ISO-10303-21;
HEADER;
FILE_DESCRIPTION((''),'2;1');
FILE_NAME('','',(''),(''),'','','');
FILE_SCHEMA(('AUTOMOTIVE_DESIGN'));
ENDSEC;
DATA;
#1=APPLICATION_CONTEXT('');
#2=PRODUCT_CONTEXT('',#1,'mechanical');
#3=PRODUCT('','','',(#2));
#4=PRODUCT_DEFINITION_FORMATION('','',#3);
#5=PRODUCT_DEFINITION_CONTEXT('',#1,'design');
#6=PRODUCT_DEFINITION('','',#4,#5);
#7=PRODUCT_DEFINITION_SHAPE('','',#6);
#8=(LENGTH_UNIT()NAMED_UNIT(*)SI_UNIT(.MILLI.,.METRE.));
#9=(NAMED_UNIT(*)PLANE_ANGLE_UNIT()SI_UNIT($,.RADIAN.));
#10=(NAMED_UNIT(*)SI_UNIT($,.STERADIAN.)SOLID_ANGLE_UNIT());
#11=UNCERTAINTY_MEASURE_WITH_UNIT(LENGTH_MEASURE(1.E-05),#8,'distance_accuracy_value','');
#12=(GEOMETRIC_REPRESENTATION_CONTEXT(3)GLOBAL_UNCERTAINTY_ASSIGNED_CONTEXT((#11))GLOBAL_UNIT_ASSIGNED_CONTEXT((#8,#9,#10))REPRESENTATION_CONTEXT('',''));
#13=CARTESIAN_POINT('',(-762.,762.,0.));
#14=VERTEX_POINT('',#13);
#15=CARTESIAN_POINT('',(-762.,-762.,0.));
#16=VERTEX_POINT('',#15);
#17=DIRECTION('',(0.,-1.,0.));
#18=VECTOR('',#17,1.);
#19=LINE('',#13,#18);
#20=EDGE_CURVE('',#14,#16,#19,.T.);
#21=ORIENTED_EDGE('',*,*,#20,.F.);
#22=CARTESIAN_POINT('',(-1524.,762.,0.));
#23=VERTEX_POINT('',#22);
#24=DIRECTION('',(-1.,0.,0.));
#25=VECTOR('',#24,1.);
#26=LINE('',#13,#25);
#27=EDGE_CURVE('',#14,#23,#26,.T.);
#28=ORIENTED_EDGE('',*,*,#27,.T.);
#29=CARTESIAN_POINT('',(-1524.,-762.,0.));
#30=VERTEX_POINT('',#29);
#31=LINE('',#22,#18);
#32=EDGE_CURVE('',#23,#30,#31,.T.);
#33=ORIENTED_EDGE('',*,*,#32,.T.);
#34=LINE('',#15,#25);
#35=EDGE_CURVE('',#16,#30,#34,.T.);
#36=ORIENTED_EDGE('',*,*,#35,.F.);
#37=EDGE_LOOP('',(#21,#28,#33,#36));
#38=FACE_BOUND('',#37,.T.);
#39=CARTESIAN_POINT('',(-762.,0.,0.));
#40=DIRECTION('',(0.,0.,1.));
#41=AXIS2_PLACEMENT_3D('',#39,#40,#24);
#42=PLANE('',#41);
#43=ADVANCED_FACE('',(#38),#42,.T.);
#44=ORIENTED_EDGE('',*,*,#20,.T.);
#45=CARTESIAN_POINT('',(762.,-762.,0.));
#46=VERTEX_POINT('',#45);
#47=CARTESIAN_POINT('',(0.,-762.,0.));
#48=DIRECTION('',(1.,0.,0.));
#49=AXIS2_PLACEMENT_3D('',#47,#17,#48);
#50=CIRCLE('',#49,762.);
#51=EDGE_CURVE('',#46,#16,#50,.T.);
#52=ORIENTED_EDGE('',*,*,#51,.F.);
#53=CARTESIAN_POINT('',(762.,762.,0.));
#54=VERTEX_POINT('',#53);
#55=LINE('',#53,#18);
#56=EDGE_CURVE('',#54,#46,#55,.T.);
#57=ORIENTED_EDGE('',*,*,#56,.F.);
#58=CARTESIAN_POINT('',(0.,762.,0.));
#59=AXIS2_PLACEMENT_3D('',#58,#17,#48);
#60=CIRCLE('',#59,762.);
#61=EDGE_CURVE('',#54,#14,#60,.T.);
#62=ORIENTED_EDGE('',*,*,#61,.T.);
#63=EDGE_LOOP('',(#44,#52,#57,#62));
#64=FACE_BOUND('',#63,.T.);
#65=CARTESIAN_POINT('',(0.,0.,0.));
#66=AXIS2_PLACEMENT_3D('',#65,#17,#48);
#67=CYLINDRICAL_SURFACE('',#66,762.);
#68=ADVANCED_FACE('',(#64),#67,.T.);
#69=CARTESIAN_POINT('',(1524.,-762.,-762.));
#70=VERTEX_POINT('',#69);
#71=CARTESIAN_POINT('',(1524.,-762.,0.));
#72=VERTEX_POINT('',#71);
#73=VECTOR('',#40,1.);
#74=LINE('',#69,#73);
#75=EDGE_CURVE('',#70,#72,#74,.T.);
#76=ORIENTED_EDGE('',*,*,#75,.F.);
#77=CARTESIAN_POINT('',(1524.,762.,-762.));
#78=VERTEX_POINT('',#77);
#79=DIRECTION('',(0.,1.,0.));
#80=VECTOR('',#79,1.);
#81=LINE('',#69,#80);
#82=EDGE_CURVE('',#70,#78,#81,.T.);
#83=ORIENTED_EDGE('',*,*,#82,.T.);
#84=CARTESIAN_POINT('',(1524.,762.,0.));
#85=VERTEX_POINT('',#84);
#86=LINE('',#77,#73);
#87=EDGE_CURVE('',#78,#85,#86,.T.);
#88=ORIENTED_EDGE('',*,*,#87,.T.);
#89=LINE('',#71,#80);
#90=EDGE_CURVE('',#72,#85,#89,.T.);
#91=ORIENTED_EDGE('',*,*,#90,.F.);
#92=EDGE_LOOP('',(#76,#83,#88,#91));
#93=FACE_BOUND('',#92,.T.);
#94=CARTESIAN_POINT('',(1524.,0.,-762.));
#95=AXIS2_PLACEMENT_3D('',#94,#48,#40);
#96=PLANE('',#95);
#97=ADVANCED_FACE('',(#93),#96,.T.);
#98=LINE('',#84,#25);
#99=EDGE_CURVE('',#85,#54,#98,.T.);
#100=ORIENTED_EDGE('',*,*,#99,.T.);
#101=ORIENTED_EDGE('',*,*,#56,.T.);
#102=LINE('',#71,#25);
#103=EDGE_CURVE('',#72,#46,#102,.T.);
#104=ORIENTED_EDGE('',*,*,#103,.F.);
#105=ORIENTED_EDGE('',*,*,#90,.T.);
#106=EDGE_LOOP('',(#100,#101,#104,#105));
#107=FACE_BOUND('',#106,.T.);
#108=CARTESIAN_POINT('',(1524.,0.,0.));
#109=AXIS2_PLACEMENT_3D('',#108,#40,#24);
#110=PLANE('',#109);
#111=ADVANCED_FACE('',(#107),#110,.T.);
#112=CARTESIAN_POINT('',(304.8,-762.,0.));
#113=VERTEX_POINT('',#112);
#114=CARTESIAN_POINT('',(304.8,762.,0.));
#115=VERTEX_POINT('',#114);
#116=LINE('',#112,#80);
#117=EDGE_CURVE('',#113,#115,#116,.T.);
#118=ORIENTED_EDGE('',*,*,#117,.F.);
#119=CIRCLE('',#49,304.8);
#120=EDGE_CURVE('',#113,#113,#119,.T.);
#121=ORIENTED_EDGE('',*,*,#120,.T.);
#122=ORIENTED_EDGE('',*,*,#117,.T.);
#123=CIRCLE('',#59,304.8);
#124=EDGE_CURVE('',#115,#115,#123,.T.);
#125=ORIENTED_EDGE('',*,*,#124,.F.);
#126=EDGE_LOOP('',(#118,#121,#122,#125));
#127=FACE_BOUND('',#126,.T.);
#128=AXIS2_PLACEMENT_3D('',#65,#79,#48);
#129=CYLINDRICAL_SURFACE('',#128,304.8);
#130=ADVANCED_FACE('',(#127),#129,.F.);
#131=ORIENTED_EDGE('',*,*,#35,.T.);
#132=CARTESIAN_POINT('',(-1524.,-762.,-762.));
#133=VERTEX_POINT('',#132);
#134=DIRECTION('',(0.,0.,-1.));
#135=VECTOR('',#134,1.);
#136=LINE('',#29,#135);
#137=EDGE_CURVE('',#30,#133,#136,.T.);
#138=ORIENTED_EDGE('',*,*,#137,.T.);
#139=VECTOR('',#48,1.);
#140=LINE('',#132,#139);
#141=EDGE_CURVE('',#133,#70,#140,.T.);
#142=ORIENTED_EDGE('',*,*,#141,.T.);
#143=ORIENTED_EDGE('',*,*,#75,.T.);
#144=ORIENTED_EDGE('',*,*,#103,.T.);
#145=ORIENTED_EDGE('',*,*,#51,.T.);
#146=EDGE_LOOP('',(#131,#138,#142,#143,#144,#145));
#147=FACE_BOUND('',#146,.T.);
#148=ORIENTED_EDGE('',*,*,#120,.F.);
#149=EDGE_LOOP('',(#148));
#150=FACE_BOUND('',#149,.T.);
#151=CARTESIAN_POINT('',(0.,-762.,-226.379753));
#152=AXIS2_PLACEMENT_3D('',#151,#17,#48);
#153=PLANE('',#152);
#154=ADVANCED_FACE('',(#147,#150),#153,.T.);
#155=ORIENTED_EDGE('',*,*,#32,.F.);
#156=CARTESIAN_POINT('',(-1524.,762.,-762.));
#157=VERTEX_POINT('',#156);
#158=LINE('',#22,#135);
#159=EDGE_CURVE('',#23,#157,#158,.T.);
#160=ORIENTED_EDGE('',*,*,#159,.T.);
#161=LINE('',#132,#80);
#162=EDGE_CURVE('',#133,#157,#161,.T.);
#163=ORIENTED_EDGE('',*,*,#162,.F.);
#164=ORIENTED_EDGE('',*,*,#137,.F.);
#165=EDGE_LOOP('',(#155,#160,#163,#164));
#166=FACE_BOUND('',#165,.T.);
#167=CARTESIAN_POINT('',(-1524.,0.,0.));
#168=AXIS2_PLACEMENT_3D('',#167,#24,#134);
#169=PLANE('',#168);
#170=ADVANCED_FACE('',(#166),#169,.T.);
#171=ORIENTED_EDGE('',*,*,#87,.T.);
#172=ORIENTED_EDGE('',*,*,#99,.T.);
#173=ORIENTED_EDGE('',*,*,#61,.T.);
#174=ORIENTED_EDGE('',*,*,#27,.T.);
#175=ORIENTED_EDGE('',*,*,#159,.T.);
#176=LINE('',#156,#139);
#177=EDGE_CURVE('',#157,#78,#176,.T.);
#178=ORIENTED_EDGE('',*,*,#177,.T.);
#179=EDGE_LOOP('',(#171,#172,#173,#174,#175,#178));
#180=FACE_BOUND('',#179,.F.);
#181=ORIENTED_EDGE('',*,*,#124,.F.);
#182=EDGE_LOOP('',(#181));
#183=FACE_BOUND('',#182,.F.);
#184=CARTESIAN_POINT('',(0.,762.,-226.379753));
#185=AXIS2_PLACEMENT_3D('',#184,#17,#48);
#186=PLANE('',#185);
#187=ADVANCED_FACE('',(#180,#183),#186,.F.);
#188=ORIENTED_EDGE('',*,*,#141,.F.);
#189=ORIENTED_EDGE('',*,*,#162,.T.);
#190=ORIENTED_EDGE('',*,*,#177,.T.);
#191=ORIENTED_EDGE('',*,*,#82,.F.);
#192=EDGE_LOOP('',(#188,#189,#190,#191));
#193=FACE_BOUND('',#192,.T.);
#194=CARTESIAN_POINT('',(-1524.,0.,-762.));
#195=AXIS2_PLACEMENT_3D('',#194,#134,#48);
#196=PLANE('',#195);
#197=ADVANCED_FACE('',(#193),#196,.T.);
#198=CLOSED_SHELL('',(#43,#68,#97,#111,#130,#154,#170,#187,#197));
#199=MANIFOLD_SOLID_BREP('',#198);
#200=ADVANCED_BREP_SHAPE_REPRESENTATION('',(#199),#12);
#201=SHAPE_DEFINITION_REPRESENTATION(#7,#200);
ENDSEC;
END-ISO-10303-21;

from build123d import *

# Parameters (mm, degrees)
F0_R     = 304.8
F1_DEPTH = 762


with BuildPart() as f1:
    # F0 (on Front) → F1 (new body, symmetric)
    with BuildSketch(Plane.XZ):
        with BuildLine():
            Line((1524, 0), (762, 0))
            ThreePointArc((762, 0), (0, 762), (-762, 0))
            Line((-762, 0), (-1524, 0))
            Line((-1524, 0), (-1524, -762))
            Line((-1524, -762), (1524, -762))
            Line((1524, -762), (1524, 0))
        make_face()
        Circle(F0_R, mode=Mode.SUBTRACT)
    extrude(amount=F1_DEPTH, both=True)


solid = f1.part
